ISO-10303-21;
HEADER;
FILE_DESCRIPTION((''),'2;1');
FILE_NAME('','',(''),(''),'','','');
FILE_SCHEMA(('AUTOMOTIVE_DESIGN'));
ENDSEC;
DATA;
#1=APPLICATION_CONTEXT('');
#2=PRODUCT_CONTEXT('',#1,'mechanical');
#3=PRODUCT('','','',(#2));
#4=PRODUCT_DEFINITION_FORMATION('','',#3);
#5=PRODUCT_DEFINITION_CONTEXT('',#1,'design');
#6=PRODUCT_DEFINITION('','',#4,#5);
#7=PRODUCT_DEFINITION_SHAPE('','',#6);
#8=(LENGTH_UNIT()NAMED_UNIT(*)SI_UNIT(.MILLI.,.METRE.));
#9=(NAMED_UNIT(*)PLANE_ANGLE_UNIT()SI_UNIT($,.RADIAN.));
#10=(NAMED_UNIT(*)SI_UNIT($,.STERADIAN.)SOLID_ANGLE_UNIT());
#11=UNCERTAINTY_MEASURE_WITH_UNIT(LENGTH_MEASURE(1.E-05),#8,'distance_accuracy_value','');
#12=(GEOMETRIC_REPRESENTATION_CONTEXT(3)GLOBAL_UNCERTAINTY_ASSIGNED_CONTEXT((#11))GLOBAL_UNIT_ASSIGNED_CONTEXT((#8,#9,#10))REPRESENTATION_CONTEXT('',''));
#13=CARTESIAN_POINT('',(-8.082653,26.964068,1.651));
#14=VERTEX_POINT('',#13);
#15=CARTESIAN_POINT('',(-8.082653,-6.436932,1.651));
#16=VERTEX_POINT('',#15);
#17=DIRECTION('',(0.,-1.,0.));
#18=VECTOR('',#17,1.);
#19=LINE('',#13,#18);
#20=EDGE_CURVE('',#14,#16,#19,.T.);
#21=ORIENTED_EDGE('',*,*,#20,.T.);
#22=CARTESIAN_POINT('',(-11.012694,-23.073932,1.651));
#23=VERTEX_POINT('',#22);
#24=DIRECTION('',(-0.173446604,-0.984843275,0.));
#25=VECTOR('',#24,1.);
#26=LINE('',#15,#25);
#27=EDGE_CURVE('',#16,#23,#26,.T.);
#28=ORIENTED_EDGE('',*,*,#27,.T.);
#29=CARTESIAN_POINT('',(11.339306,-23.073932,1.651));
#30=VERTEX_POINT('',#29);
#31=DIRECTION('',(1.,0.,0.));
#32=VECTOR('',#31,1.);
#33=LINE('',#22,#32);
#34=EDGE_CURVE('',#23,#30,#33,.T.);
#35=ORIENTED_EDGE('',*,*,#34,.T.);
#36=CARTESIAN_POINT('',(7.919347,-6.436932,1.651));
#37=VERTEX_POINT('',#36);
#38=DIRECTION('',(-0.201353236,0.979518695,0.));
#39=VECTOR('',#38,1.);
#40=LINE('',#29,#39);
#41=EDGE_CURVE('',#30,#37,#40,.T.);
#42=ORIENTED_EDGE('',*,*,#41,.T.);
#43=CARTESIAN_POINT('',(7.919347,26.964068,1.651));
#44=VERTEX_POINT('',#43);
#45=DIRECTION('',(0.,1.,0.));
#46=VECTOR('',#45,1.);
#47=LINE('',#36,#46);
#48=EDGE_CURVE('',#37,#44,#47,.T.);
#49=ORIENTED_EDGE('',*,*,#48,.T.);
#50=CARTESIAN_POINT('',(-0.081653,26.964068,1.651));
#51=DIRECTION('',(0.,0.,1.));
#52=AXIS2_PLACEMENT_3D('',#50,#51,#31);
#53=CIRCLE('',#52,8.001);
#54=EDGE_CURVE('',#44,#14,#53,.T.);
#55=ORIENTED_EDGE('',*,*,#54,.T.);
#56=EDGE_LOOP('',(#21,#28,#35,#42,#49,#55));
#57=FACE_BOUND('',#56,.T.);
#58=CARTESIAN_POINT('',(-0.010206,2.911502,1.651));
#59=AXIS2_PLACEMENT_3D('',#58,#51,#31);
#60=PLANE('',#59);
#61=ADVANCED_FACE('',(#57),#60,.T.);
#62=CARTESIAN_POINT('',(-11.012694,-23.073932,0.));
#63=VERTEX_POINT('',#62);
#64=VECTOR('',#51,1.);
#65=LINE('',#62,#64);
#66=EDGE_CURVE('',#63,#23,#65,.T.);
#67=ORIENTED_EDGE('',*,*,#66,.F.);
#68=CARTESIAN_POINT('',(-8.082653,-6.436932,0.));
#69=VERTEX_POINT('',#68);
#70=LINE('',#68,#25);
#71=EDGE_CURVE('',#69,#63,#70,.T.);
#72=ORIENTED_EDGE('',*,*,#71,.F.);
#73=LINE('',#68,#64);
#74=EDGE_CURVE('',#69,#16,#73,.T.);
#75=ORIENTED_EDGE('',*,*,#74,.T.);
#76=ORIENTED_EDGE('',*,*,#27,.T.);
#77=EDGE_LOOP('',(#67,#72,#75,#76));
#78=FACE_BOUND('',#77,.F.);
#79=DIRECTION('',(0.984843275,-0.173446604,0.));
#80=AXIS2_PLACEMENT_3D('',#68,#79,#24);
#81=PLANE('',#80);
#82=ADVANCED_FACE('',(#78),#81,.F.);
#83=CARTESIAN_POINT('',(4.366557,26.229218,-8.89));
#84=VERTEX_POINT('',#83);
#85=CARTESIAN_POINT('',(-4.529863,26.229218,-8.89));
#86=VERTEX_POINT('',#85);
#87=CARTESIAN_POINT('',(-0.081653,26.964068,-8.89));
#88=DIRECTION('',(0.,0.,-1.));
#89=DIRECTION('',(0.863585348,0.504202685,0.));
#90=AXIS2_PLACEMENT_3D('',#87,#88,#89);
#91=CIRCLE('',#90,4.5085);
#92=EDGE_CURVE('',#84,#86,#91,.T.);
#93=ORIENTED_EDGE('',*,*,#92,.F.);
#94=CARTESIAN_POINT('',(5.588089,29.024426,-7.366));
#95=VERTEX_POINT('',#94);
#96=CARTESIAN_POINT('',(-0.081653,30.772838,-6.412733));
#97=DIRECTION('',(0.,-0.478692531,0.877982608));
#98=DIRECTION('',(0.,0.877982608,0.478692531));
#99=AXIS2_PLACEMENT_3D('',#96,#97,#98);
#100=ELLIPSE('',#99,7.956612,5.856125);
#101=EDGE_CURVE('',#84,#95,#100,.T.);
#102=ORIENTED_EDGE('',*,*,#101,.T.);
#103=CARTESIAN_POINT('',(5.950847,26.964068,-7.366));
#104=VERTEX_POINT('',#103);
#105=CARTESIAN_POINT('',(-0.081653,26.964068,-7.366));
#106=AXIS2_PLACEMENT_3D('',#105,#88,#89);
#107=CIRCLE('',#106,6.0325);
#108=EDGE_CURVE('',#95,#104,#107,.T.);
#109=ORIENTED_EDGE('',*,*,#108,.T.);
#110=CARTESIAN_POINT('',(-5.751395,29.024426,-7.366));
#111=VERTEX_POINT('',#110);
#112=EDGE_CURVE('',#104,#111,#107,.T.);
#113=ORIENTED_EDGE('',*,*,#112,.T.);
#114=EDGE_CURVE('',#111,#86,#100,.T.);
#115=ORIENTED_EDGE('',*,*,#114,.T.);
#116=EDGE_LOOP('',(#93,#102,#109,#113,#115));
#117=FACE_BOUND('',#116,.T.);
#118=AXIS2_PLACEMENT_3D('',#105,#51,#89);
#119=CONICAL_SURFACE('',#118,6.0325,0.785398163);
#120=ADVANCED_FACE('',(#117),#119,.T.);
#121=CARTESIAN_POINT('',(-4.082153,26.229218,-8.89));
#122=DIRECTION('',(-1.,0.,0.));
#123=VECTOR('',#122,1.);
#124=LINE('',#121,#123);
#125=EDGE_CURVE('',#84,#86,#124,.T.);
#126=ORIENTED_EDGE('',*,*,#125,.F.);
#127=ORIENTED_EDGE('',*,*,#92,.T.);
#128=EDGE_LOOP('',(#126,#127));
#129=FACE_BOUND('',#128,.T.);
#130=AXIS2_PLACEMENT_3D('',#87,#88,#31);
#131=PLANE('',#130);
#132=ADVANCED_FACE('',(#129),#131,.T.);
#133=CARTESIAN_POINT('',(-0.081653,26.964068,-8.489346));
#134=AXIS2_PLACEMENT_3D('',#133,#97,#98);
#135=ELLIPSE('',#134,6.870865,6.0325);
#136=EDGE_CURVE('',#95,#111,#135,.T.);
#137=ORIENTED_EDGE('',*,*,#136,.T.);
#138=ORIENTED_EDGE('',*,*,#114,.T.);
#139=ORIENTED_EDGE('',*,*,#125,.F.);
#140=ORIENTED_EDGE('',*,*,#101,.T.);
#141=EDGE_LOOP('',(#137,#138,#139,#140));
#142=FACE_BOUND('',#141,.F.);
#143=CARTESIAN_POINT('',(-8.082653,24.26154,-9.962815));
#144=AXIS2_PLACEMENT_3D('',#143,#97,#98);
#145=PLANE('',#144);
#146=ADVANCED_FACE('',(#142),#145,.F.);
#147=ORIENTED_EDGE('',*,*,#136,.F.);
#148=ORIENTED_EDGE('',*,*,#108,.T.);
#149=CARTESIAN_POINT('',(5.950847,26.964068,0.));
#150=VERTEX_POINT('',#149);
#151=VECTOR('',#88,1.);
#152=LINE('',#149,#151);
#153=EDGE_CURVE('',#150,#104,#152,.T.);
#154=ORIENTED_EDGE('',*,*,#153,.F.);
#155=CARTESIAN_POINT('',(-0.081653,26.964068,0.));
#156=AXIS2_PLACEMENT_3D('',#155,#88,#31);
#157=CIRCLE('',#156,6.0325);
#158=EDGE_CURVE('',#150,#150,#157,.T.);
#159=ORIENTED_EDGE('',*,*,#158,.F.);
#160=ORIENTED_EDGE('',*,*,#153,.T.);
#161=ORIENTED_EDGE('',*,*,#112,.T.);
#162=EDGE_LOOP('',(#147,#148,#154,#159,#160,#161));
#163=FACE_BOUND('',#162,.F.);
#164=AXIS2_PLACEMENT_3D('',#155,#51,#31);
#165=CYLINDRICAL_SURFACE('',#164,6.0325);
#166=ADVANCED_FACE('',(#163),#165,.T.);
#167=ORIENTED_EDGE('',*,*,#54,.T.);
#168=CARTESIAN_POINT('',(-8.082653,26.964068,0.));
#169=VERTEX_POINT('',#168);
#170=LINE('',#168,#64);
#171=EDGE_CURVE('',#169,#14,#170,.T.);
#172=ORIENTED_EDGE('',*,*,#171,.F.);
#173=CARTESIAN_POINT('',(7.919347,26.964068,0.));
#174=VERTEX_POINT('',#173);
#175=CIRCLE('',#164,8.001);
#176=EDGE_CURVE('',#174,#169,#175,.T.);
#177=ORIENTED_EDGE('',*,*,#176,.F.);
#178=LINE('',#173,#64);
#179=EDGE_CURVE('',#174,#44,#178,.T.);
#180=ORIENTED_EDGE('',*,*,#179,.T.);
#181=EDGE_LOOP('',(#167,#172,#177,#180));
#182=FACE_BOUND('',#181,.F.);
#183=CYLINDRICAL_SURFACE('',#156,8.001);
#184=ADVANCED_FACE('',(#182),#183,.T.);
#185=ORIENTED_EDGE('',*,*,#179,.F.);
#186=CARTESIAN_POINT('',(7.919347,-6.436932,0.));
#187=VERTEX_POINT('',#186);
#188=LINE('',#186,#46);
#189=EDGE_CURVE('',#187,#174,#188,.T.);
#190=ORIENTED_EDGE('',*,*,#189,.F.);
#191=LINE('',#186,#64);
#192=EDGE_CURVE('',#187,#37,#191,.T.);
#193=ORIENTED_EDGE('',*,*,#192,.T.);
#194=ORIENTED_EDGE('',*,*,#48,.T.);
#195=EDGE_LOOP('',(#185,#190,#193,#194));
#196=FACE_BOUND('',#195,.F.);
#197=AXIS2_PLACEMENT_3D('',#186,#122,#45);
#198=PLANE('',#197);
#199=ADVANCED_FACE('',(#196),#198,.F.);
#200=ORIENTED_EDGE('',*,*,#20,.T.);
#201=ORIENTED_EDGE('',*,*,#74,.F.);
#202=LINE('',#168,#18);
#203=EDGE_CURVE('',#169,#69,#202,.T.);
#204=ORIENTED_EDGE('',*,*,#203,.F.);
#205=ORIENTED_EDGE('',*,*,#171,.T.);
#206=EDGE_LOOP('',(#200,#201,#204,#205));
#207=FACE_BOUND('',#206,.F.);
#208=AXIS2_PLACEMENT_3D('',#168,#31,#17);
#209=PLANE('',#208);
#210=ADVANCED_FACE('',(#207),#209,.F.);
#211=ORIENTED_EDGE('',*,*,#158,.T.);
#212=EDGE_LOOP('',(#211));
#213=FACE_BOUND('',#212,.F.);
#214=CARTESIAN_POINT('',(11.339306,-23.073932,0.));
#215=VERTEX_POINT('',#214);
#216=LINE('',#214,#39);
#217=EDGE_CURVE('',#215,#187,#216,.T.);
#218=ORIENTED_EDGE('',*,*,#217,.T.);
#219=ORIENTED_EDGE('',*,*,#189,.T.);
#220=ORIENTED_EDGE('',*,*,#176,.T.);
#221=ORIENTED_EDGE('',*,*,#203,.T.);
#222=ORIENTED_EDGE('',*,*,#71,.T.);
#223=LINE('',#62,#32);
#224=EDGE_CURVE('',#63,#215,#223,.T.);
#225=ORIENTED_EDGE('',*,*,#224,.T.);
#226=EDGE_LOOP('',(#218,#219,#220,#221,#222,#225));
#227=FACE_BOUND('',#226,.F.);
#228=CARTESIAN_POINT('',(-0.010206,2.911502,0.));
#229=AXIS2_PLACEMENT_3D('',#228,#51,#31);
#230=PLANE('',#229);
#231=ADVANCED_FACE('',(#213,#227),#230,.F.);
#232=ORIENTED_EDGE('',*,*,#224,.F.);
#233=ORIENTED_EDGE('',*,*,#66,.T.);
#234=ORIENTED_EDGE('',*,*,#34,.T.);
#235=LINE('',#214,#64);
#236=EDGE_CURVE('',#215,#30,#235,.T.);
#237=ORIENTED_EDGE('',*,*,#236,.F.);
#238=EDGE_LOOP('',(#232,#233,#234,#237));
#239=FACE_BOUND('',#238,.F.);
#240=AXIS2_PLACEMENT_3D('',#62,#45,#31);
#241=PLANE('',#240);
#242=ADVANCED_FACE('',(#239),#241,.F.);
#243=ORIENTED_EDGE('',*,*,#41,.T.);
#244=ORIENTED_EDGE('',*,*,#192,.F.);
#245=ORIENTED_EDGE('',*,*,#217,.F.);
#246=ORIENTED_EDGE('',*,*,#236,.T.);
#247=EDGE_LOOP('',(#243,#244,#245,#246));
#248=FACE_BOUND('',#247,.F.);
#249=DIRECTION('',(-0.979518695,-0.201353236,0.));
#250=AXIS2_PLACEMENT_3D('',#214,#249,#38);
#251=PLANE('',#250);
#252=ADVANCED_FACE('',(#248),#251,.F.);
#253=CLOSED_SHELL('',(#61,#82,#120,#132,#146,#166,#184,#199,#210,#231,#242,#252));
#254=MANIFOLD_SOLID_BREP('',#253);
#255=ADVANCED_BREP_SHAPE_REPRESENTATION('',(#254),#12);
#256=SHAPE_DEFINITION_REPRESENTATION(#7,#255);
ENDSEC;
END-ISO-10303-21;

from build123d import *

# Parameters (mm, degrees)
F1_DEPTH    = 1.651
F2_R        = 6.0325
F3_DEPTH    = 8.89
F5_DEPTH    = 17.3228
F6_T2_ANGLE = 240.5568781665


# Not quite as in the source:
# - a fillet or chamfer that OpenCascade refuses, or shapes differently, is made with other operations: its cross-section is extruded or revolved along the edge and cut away or added


with BuildPart() as f1:
    # F0 (on Top) → F1 (new body)
    with BuildSketch(Plane.XY):
        with BuildLine():
            Line((-8.0826530047, 26.9640675335), (-8.0826530047, -6.4369324665))
            Line((-8.0826530047, -6.4369324665), (-11.0126939906, -23.0739324665))
            Line((-11.0126939906, -23.0739324665), (11.3393060094, -23.0739324665))
            Line((11.3393060094, -23.0739324665), (7.9193469953, -6.4369324665))
            Line((7.9193469953, -6.4369324665), (7.9193469953, 26.9640675335))
            ThreePointArc((7.9193469953, 26.9640675335), (-0.0816530047, 34.9650675335), (-8.0826530047, 26.9640675335))
        make_face()
    extrude(amount=F1_DEPTH)

    # F2 (on face) → F3 (join)
    with BuildSketch(Plane(origin=(0, 0, 0), x_dir=(1, 0, 0), z_dir=(0, 0, -1))):
        with Locations((-0.0816530047, -26.9640675335)):
            Circle(F2_R)
    extrude(amount=F3_DEPTH)

    # F4 (on face) → F5 (cut)
    with BuildSketch(Plane(origin=(-8.0826530047, 0, 0), x_dir=(0, -1, 0), z_dir=(-1, 0, 0))):
        Polygon((-24.261539802, -9.96281486), (-34.2662967741, -4.5080343261), (-34.2662967741, -10.2679394186), align=None)
    extrude(amount=-F5_DEPTH, mode=Mode.SUBTRACT)

    # F6: chamfer of 1.524 on 1 edges, made by hand

    # F6_s1 → F6_t2 (revolve, cut)
    with BuildSketch(Plane(origin=(-11.7615074362, 20.1448064433, 0), x_dir=(0, 0, 1), z_dir=(-0.5042026846, 0.8635853477, 0))):
        Polygon((-7.366, 19.5573408996), (-8.89, 18.0333408996), (-8.89, 19.5573408996), align=None)
    revolve(axis=Axis((-0.0816530047, 26.9640675335, -8.89), (0, 0, -1)), revolution_arc=F6_T2_ANGLE, mode=Mode.SUBTRACT)


solid = f1.part
